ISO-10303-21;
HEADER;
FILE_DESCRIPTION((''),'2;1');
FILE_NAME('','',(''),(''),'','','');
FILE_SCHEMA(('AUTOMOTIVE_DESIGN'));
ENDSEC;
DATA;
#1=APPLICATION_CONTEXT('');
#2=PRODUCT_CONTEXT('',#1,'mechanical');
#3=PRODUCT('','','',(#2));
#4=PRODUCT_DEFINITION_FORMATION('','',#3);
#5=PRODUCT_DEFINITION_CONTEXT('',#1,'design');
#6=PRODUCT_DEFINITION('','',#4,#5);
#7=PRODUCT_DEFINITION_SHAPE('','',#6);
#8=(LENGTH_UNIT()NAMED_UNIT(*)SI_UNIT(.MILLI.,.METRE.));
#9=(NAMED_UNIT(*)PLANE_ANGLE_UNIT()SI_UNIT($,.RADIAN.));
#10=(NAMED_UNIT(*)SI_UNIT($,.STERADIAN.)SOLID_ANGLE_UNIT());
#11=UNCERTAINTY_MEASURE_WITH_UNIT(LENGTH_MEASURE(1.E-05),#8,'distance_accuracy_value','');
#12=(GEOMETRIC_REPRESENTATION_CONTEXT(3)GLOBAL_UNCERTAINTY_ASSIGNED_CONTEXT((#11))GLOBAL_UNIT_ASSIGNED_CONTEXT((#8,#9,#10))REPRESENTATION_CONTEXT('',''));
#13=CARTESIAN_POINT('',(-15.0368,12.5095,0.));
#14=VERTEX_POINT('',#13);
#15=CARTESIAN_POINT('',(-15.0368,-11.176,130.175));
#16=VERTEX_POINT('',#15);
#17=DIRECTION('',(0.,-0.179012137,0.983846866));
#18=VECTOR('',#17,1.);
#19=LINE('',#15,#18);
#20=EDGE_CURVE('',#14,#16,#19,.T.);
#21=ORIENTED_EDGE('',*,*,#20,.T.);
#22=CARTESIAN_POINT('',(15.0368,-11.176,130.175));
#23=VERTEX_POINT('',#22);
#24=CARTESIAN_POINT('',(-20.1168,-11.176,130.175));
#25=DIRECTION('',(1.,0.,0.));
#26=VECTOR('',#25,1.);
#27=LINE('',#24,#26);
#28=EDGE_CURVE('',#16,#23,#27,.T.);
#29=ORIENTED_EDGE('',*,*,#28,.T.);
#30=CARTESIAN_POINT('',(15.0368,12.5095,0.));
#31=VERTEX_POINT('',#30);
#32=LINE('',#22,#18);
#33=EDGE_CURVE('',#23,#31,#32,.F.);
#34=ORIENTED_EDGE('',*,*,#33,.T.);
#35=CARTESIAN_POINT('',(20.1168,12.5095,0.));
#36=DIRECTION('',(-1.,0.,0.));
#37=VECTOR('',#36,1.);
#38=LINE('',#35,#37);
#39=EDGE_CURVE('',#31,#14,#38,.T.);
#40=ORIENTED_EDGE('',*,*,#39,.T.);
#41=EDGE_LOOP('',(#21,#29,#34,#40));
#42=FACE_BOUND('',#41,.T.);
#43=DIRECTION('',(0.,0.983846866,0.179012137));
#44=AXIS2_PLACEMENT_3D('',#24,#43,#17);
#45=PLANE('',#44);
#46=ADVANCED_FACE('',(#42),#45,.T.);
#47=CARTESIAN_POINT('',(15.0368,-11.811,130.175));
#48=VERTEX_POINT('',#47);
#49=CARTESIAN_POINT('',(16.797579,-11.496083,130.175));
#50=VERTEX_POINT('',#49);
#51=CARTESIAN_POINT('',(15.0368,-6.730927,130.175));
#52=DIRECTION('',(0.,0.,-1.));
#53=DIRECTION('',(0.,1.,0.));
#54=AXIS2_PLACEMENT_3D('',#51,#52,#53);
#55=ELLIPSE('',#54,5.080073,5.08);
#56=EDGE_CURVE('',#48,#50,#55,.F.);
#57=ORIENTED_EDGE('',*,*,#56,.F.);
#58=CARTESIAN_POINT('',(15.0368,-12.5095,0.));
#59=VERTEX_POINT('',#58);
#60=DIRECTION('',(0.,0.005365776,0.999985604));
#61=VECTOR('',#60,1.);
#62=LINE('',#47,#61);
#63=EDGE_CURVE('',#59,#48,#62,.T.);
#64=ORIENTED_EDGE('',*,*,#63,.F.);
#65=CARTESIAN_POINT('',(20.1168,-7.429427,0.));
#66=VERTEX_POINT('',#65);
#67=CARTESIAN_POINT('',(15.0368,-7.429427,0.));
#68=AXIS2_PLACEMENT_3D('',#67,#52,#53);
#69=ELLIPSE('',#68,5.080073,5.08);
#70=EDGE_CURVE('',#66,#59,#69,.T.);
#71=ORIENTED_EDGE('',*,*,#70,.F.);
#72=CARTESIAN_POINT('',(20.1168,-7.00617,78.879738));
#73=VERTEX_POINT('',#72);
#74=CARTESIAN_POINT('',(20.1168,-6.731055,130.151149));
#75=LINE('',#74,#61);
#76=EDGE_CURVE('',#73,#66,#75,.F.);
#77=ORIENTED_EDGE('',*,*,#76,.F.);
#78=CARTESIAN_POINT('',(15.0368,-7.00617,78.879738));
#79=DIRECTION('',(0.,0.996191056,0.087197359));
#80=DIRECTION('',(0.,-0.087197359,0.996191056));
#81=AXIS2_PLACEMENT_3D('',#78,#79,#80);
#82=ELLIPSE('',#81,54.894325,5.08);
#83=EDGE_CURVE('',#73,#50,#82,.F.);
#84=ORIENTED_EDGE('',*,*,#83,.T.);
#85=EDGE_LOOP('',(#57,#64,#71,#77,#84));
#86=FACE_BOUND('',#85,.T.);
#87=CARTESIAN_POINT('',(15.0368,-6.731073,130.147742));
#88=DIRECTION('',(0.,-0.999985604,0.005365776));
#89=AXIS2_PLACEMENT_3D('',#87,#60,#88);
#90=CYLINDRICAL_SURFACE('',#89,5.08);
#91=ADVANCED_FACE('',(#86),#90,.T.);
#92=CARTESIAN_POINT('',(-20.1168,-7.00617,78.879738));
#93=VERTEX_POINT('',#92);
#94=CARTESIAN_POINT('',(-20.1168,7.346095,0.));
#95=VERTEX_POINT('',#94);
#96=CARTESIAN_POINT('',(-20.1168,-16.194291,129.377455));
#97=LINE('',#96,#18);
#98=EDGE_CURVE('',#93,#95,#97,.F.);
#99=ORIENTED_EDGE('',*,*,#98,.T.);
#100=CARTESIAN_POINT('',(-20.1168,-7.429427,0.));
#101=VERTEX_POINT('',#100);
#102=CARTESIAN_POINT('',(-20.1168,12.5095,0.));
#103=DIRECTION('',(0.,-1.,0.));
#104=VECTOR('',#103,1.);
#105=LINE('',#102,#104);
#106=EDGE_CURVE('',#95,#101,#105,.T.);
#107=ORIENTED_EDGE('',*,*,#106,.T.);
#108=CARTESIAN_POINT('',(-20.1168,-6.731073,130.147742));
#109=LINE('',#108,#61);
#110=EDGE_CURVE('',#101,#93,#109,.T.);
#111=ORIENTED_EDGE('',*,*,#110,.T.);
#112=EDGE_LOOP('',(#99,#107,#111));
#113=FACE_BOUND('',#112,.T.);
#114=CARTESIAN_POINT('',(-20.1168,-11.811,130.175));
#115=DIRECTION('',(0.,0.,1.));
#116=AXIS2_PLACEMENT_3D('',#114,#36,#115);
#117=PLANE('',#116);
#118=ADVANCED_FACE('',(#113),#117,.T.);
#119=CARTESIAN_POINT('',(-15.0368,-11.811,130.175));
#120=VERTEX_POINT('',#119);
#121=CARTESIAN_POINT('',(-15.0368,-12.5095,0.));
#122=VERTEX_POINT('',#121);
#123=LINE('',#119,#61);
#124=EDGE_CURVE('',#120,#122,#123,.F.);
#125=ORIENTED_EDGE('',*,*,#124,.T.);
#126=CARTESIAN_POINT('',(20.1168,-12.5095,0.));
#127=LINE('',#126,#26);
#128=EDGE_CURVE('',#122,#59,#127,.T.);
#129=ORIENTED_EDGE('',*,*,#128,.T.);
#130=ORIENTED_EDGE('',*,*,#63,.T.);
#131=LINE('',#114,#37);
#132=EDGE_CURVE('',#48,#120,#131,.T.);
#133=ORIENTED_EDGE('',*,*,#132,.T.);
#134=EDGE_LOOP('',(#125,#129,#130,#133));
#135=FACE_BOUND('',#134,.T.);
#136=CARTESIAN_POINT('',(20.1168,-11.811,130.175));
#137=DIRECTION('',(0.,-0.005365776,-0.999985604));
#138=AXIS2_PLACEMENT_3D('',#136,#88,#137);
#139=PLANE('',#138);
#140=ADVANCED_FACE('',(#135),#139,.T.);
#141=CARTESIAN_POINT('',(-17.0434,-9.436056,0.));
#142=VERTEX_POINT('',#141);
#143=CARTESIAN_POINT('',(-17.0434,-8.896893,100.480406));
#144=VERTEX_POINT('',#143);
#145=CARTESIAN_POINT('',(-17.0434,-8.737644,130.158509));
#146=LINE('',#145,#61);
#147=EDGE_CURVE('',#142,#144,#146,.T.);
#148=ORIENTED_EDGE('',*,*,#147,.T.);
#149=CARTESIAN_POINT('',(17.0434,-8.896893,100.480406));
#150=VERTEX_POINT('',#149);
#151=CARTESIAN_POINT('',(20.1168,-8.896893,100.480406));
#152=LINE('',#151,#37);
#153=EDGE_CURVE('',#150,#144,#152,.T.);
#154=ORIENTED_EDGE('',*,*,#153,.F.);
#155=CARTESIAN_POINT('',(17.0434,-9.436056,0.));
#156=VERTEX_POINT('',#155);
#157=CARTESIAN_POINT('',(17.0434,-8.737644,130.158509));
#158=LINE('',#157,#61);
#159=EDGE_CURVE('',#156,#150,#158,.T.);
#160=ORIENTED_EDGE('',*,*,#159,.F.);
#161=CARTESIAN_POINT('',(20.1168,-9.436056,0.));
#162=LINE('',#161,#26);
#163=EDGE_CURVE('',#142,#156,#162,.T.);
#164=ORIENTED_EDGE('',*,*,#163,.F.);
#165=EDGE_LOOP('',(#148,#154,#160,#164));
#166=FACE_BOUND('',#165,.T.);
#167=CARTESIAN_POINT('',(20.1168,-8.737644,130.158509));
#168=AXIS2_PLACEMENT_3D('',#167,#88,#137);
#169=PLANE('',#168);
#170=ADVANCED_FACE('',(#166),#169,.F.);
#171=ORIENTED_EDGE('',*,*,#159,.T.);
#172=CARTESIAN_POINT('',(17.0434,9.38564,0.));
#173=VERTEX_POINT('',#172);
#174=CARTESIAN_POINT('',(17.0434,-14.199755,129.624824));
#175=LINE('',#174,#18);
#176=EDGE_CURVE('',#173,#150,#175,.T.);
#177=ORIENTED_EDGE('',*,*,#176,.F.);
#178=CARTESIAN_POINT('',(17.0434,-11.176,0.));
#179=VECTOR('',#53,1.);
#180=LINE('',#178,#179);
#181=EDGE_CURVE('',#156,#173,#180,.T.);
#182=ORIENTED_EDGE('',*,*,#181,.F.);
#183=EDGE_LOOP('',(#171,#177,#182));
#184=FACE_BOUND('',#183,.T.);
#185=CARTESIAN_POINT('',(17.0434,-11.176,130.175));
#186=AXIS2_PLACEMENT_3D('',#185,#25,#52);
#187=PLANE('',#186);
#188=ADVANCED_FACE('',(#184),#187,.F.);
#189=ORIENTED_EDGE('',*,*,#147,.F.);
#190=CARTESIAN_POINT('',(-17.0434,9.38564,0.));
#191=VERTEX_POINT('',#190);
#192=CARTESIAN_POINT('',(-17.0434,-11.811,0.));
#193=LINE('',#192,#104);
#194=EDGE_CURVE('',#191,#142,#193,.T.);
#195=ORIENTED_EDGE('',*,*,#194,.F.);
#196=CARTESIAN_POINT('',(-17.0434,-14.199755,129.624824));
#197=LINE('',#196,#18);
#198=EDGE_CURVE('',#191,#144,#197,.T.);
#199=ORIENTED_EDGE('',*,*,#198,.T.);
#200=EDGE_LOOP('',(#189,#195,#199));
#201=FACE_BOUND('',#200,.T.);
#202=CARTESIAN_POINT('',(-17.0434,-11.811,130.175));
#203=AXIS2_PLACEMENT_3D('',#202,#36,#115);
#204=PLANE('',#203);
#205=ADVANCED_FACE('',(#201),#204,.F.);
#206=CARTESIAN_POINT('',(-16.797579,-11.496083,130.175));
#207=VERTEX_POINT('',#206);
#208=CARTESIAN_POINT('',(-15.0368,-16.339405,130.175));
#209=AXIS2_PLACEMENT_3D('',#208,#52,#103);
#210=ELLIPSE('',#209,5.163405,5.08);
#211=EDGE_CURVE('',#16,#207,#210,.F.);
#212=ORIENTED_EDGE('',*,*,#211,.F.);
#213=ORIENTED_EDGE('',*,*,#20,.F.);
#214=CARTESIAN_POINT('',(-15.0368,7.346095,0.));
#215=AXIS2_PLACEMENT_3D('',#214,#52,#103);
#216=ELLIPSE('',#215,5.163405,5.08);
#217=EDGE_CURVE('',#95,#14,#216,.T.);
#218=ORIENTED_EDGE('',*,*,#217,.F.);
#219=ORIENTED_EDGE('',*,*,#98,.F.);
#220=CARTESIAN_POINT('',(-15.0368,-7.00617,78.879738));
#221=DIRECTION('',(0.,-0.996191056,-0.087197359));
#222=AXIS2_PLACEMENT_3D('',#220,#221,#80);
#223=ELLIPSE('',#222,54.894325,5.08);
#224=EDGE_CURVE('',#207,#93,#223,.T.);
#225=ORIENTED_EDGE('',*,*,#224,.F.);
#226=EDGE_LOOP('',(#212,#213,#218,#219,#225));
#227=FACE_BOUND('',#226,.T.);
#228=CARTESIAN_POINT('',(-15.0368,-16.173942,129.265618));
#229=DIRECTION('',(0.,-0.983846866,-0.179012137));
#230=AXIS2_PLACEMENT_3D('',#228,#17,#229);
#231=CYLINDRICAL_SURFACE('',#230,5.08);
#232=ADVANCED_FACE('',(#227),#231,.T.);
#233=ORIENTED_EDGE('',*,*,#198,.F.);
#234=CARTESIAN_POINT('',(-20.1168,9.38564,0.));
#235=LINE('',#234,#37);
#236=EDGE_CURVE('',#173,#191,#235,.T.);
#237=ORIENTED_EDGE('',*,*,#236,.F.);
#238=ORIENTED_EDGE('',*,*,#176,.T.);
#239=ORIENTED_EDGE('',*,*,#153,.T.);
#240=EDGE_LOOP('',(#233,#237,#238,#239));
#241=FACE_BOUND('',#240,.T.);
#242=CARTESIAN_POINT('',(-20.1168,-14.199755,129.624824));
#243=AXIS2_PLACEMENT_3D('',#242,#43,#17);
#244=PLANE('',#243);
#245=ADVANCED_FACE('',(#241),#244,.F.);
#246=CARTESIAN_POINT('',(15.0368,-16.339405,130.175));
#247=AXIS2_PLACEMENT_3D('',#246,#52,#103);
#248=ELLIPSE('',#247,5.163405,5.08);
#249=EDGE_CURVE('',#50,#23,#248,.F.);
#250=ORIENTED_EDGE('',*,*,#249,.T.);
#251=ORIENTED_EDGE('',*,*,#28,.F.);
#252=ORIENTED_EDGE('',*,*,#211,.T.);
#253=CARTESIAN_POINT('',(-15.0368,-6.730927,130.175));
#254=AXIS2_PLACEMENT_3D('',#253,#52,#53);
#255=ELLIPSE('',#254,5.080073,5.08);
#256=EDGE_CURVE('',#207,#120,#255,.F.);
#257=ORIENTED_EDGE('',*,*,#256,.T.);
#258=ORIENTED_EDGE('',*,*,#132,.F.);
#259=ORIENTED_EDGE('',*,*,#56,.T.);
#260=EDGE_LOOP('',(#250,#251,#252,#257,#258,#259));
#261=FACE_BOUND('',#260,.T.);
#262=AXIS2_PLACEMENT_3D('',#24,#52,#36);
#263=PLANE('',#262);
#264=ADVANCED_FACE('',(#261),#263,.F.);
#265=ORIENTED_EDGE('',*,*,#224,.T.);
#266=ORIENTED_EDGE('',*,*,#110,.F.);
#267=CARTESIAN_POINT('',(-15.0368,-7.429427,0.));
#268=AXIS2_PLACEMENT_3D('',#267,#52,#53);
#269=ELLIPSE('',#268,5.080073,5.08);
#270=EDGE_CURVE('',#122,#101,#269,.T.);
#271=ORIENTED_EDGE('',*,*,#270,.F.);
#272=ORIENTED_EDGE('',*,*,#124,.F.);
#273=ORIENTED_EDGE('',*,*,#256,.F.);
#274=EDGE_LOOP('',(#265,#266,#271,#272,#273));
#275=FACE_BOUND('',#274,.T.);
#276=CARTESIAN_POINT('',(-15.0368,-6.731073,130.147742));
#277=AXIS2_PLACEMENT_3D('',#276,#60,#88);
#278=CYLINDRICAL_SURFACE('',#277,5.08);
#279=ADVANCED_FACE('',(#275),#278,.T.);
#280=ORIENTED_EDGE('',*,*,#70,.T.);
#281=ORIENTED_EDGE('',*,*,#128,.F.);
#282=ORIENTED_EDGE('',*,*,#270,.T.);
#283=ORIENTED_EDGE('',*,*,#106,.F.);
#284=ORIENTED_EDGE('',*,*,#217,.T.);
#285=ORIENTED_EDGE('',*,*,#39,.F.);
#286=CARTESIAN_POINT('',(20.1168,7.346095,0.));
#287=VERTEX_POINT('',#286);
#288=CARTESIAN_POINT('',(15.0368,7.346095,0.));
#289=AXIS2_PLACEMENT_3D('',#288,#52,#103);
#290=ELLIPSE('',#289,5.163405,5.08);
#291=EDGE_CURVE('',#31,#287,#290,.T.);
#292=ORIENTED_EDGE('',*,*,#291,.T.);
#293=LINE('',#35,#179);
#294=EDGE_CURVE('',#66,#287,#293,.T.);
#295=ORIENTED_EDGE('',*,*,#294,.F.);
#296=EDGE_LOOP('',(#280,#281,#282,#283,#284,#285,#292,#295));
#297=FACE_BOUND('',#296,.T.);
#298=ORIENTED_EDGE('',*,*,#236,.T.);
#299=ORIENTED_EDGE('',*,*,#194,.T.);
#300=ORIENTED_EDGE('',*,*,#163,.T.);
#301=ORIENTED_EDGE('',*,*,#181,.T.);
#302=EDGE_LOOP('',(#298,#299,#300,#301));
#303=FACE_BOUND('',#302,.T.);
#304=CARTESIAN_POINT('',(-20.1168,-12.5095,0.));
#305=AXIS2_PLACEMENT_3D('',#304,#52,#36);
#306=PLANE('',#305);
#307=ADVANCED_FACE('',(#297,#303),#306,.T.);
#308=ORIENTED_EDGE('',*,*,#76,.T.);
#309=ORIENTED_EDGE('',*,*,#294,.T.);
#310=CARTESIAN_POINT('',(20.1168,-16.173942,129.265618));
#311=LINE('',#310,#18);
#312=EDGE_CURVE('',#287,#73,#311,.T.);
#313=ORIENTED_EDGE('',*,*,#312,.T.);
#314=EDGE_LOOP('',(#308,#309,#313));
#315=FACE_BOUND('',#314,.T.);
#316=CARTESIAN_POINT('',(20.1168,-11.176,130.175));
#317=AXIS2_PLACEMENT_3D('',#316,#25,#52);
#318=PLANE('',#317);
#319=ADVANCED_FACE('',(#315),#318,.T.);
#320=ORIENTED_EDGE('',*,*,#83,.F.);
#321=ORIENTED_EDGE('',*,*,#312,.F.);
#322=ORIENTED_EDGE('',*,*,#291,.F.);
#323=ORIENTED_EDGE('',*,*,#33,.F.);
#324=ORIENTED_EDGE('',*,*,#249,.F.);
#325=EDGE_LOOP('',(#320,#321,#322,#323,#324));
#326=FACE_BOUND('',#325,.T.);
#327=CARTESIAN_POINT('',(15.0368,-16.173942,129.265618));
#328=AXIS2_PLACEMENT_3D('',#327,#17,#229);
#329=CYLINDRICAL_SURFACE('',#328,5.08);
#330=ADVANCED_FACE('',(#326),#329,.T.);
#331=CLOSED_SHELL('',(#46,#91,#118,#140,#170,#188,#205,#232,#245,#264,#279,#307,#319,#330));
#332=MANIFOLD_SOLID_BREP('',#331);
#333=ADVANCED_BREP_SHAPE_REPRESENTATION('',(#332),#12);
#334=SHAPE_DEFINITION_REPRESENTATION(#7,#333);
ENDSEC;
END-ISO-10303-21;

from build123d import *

# Parameters (mm, degrees)
SHELL1_T  = -3.0734
FILLET1_R = 5.08


with BuildPart() as part:
    # Sketch1 → Loft1 section 0
    with BuildSketch(Plane.XY):
        with BuildLine():
            Line((20.1168, 12.5095), (-20.1168, 12.5095))
            Line((-20.1168, 12.5095), (-20.1168, -12.5095))
            Line((-20.1168, -12.5095), (20.1168, -12.5095))
            Line((20.1168, -12.5095), (20.1168, 12.5095))
        make_face()
    # 3DSketch1 → Loft1 section 1
    with BuildSketch(Plane(origin=(-20.1168, -11.811, 130.175), x_dir=(0.9998754744294865, 0.015780862917132092, 0), z_dir=(0, 0, 1))):
        with BuildLine():
            Line((0, 0), (40.228589888, -0.634920926))
            Line((40.228589888, -0.634920926), (40.238610736, 0))
            Line((40.238610736, 0), (0.010020848, 0.634920926))
            Line((0.010020848, 0.634920926), (0, 0))
        make_face()
    loft()

    # Shell1
    shell1_openings = [part.faces().sort_by_distance(p)[0] for p in [
        (0, 0, 0),
    ]]
    offset(amount=SHELL1_T, openings=shell1_openings, kind=Kind.INTERSECTION)

    # Fillet1
    # the kernel refuses this fillet: 5.08 mm, written as the material it takes off along each edge
    with BuildSketch(Plane(origin=(20.1168, 14.78295414, -12.494855192), x_dir=(-1, 0, 0), z_dir=(0, -0.1790121369959656, 0.9838468655274243))) as fillet1_piece_1:
        with BuildLine():
            CenterArc((FILLET1_R, FILLET1_R), FILLET1_R, 180, 90)
            Line((0, FILLET1_R), (0, 0))
            Line((0, 0), (FILLET1_R, 0))
        make_face()
    extrude(amount=157.712257691, mode=Mode.SUBTRACT)
    with BuildSketch(Plane(origin=(-20.1168, 14.78295414, -12.494855192), x_dir=(1, 0, 0), z_dir=(0, -0.17901213699596547, 0.9838468655274243))) as fillet1_piece_2:
        with BuildLine():
            CenterArc((FILLET1_R, -FILLET1_R), FILLET1_R, 90, 90)
            Line((0, -FILLET1_R), (0, 0))
            Line((0, 0), (FILLET1_R, 0))
        make_face()
    extrude(amount=157.712257691, mode=Mode.SUBTRACT)
    with BuildSketch(Plane(origin=(-20.1168, -12.57764536, -12.699817172), x_dir=(0, 0.9999856041181256, -0.005365776412341061), z_dir=(0, 0.0053657764123410615, 0.9999856041181258)), Plane(origin=(20.1168, -12.57764536, -12.699817172), x_dir=(-1, 0, 0), z_dir=(0, 0.0053657764123410485, 0.9999856041181258))) as fillet1_piece_3:
        with BuildLine():
            CenterArc((FILLET1_R, -FILLET1_R), FILLET1_R, 90, 90)
            Line((0, -FILLET1_R), (0, 0))
            Line((0, 0), (FILLET1_R, 0))
        make_face()
    extrude(amount=155.576874011, mode=Mode.SUBTRACT)


solid = part.part
